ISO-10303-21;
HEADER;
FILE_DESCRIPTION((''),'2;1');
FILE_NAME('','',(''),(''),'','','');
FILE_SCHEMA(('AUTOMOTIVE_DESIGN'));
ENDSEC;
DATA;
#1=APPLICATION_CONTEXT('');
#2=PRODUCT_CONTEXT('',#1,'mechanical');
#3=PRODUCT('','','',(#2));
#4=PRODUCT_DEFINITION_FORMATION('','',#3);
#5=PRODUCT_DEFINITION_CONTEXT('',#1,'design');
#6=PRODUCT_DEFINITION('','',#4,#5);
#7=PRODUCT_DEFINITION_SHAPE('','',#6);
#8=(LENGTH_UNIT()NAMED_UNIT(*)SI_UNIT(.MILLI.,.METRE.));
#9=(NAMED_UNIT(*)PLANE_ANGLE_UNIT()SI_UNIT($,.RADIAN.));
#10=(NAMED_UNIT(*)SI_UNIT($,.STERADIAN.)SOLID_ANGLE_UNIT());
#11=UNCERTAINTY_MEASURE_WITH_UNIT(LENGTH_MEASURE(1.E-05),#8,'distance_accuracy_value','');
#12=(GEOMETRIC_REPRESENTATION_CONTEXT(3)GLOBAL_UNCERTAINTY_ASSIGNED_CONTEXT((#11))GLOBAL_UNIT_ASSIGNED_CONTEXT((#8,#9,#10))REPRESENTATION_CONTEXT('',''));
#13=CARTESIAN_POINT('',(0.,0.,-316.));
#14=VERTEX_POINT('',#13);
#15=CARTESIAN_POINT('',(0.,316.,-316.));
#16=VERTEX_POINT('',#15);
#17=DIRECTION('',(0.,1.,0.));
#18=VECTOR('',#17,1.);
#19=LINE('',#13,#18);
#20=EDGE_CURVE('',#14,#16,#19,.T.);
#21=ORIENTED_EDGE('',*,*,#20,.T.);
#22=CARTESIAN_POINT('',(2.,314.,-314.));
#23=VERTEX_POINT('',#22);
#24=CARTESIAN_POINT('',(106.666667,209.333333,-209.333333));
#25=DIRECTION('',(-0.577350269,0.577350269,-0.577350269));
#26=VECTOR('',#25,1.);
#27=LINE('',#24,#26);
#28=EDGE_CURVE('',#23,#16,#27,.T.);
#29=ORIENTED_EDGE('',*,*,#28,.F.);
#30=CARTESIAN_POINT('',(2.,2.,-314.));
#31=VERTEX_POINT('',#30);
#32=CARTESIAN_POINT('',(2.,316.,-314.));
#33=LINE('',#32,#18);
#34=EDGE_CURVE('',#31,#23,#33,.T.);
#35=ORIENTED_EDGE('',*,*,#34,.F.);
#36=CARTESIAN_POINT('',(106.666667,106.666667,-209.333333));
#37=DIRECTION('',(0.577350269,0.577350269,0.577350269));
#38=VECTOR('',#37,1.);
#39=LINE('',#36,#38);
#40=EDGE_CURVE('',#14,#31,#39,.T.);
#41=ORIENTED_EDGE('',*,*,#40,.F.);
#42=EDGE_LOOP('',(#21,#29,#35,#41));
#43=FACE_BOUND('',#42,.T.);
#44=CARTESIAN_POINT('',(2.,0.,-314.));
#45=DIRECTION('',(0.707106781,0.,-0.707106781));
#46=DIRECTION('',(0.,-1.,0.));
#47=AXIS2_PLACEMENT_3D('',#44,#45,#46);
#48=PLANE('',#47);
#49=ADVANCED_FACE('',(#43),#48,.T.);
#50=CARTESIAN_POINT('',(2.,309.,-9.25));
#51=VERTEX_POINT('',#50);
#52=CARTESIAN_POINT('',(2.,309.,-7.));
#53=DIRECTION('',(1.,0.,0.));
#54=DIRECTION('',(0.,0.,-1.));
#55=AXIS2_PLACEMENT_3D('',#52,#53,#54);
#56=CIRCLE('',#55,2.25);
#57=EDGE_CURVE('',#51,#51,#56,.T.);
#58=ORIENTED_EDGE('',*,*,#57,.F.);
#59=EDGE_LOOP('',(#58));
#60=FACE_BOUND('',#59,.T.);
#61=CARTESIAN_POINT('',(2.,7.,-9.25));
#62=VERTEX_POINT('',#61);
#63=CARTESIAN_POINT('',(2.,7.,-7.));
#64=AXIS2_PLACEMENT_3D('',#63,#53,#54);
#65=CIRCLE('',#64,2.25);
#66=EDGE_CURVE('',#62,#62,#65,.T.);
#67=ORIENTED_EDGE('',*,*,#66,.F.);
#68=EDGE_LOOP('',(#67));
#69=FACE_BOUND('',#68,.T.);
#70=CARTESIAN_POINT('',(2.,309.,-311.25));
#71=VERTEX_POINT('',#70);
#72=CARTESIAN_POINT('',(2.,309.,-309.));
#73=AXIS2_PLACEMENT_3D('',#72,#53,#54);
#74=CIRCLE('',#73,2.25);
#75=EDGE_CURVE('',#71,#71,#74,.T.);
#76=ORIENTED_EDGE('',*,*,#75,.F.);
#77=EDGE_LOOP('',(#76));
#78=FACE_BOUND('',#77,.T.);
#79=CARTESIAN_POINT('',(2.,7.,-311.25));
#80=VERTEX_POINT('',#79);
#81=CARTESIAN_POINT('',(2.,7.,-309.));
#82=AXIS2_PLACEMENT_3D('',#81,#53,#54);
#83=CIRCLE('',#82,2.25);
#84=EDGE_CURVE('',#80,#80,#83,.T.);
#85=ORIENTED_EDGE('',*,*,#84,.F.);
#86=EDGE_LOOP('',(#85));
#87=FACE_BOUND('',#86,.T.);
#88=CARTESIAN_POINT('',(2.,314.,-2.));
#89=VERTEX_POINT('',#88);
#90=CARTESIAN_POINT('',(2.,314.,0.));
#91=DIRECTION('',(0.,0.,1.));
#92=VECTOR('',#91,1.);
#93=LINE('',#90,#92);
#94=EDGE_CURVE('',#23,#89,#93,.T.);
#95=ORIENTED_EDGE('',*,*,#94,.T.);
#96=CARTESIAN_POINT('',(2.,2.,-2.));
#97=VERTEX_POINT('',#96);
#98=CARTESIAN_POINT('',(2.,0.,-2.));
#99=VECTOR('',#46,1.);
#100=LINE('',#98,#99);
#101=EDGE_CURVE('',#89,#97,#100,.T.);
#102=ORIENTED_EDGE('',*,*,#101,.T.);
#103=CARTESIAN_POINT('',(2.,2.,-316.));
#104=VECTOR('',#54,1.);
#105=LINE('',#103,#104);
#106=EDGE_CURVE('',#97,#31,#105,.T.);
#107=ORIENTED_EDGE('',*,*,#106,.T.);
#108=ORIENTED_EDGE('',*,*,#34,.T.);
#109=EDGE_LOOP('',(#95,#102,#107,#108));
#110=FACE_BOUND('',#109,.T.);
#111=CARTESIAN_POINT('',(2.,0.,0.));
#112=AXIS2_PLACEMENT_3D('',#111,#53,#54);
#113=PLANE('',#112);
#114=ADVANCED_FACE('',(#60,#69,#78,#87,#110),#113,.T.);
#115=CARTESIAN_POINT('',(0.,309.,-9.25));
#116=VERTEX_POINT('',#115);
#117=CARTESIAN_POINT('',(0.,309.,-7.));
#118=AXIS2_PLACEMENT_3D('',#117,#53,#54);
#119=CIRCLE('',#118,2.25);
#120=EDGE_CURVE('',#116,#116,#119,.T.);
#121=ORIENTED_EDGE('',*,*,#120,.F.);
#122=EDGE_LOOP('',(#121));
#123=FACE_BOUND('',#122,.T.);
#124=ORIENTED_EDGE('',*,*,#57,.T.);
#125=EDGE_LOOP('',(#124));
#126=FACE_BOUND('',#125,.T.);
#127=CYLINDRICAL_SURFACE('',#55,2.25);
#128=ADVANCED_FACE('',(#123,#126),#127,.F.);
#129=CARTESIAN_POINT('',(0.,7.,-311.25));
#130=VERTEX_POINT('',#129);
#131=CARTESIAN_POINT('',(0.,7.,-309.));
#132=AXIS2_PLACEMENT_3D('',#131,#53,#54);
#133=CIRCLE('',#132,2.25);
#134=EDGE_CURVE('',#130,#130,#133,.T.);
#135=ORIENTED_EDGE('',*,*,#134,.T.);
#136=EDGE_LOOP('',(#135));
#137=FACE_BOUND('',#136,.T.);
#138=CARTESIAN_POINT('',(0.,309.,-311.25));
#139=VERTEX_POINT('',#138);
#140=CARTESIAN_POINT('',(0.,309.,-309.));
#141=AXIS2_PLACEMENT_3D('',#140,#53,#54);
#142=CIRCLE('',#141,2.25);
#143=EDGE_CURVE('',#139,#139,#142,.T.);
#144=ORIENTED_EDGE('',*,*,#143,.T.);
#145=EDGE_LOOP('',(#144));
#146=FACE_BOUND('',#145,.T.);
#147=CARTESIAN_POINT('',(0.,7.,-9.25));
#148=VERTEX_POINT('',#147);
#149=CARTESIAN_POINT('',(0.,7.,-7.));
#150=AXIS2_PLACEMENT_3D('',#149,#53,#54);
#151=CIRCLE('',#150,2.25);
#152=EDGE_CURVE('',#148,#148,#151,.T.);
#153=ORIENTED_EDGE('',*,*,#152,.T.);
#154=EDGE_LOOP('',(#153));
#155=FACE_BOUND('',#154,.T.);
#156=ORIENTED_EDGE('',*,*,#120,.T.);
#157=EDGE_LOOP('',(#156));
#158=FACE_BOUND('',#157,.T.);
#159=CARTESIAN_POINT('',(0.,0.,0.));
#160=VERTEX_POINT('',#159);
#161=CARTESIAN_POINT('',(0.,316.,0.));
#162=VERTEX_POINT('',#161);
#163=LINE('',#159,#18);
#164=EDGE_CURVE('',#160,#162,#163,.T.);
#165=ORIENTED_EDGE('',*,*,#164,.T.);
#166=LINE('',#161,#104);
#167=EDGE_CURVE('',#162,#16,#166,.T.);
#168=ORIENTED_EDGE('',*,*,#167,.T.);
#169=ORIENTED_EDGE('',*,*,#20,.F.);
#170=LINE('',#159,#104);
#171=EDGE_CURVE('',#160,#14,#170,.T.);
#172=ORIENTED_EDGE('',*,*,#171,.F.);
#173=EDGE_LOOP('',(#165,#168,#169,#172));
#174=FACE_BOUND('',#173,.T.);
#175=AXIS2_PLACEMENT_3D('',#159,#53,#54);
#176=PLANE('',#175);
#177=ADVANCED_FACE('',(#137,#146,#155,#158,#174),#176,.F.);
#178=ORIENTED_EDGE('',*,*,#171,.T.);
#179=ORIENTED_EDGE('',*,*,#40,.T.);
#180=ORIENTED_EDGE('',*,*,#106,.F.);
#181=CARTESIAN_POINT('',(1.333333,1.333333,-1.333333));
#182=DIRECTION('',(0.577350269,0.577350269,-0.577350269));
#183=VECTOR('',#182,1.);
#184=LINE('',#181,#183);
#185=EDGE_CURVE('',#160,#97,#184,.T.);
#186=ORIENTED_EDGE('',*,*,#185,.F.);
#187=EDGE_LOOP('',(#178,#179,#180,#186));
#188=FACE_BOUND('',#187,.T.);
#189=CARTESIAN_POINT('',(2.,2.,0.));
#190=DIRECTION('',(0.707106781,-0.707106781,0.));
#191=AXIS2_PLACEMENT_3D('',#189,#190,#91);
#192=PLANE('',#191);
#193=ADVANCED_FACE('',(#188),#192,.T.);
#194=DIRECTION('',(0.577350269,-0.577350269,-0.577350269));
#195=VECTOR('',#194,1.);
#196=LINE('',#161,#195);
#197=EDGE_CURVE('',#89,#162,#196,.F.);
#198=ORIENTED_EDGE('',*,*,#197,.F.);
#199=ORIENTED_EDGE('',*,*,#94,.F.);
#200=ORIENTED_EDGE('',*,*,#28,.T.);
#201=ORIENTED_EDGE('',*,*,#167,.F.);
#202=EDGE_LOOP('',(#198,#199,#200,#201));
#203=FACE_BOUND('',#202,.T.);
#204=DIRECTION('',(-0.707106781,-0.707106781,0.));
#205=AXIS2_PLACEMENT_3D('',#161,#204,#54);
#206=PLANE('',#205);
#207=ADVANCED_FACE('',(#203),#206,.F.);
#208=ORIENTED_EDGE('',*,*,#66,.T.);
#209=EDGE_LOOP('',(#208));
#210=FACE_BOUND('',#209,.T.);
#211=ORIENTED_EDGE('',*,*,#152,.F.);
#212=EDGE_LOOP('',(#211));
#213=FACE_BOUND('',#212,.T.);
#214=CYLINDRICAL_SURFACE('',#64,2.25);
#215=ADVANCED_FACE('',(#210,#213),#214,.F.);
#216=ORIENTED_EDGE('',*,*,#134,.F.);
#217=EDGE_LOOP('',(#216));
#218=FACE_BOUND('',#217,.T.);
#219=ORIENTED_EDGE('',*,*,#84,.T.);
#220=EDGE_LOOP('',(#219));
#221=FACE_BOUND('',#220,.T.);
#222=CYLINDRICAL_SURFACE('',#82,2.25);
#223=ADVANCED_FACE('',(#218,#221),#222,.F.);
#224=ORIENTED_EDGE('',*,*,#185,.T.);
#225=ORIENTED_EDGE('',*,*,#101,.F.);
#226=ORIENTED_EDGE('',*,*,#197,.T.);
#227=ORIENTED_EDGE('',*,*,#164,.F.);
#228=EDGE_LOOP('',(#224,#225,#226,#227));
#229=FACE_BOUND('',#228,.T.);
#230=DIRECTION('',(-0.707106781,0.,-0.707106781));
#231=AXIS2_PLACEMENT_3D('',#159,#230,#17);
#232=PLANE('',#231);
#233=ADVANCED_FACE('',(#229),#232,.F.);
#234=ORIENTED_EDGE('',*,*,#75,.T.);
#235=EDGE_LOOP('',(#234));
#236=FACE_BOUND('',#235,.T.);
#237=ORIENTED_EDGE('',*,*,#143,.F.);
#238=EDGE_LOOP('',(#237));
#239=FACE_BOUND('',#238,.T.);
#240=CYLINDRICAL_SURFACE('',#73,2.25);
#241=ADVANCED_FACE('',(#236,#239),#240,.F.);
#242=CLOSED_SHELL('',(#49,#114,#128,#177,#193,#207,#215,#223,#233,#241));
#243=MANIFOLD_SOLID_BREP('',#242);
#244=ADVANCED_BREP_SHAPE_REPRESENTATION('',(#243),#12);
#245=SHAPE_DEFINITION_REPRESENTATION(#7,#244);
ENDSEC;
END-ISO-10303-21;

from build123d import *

# Parameters (mm, degrees)
SKETCH1_W                = 316
SKETCH1_H                = 316
BOSS_EXTRUDE1_DEPTH      = 2
CHAMFER1_SIZE            = 2
M4_CLEARANCE_HOLE1_D     = 4.5
M4_CLEARANCE_HOLE1_DEPTH = 30
M4_CLEARANCE_HOLE1_TIP   = 1.351936393


with BuildPart() as part:
    # Sketch1 → Boss-Extrude1 (new body)
    with BuildSketch(Plane(origin=(0, 0, 0), x_dir=(0, 0, -1), z_dir=(1, 0, 0))):
        with Locations((158, 158)):
            Rectangle(SKETCH1_W, SKETCH1_H)
    extrude(amount=BOSS_EXTRUDE1_DEPTH)

    # Chamfer1
    chamfer1_edges = [part.edges().sort_by_distance(p)[0] for p in [
        (2, 158, 0),
        (2, 316, -158),
        (2, 158, -316),
        (2, 0, -158),
    ]]
    chamfer(chamfer1_edges, length=CHAMFER1_SIZE - 0.0001)  # a hair under: the kernel refuses the full size

    # M4 Clearance Hole1
    with Locations(Plane(origin=(2, 0, 0), x_dir=(0, 0, -1), z_dir=(1, 0, 0))):
        with Locations((7, 309), (309, 309), (309, 7), (7, 7)):
            Hole(M4_CLEARANCE_HOLE1_D / 2, depth=M4_CLEARANCE_HOLE1_DEPTH)
            with Locations((0, 0, -(M4_CLEARANCE_HOLE1_DEPTH + M4_CLEARANCE_HOLE1_TIP / 2))):  # 118° drill point
                Cone(0, M4_CLEARANCE_HOLE1_D / 2, M4_CLEARANCE_HOLE1_TIP, mode=Mode.SUBTRACT)


solid = part.part
